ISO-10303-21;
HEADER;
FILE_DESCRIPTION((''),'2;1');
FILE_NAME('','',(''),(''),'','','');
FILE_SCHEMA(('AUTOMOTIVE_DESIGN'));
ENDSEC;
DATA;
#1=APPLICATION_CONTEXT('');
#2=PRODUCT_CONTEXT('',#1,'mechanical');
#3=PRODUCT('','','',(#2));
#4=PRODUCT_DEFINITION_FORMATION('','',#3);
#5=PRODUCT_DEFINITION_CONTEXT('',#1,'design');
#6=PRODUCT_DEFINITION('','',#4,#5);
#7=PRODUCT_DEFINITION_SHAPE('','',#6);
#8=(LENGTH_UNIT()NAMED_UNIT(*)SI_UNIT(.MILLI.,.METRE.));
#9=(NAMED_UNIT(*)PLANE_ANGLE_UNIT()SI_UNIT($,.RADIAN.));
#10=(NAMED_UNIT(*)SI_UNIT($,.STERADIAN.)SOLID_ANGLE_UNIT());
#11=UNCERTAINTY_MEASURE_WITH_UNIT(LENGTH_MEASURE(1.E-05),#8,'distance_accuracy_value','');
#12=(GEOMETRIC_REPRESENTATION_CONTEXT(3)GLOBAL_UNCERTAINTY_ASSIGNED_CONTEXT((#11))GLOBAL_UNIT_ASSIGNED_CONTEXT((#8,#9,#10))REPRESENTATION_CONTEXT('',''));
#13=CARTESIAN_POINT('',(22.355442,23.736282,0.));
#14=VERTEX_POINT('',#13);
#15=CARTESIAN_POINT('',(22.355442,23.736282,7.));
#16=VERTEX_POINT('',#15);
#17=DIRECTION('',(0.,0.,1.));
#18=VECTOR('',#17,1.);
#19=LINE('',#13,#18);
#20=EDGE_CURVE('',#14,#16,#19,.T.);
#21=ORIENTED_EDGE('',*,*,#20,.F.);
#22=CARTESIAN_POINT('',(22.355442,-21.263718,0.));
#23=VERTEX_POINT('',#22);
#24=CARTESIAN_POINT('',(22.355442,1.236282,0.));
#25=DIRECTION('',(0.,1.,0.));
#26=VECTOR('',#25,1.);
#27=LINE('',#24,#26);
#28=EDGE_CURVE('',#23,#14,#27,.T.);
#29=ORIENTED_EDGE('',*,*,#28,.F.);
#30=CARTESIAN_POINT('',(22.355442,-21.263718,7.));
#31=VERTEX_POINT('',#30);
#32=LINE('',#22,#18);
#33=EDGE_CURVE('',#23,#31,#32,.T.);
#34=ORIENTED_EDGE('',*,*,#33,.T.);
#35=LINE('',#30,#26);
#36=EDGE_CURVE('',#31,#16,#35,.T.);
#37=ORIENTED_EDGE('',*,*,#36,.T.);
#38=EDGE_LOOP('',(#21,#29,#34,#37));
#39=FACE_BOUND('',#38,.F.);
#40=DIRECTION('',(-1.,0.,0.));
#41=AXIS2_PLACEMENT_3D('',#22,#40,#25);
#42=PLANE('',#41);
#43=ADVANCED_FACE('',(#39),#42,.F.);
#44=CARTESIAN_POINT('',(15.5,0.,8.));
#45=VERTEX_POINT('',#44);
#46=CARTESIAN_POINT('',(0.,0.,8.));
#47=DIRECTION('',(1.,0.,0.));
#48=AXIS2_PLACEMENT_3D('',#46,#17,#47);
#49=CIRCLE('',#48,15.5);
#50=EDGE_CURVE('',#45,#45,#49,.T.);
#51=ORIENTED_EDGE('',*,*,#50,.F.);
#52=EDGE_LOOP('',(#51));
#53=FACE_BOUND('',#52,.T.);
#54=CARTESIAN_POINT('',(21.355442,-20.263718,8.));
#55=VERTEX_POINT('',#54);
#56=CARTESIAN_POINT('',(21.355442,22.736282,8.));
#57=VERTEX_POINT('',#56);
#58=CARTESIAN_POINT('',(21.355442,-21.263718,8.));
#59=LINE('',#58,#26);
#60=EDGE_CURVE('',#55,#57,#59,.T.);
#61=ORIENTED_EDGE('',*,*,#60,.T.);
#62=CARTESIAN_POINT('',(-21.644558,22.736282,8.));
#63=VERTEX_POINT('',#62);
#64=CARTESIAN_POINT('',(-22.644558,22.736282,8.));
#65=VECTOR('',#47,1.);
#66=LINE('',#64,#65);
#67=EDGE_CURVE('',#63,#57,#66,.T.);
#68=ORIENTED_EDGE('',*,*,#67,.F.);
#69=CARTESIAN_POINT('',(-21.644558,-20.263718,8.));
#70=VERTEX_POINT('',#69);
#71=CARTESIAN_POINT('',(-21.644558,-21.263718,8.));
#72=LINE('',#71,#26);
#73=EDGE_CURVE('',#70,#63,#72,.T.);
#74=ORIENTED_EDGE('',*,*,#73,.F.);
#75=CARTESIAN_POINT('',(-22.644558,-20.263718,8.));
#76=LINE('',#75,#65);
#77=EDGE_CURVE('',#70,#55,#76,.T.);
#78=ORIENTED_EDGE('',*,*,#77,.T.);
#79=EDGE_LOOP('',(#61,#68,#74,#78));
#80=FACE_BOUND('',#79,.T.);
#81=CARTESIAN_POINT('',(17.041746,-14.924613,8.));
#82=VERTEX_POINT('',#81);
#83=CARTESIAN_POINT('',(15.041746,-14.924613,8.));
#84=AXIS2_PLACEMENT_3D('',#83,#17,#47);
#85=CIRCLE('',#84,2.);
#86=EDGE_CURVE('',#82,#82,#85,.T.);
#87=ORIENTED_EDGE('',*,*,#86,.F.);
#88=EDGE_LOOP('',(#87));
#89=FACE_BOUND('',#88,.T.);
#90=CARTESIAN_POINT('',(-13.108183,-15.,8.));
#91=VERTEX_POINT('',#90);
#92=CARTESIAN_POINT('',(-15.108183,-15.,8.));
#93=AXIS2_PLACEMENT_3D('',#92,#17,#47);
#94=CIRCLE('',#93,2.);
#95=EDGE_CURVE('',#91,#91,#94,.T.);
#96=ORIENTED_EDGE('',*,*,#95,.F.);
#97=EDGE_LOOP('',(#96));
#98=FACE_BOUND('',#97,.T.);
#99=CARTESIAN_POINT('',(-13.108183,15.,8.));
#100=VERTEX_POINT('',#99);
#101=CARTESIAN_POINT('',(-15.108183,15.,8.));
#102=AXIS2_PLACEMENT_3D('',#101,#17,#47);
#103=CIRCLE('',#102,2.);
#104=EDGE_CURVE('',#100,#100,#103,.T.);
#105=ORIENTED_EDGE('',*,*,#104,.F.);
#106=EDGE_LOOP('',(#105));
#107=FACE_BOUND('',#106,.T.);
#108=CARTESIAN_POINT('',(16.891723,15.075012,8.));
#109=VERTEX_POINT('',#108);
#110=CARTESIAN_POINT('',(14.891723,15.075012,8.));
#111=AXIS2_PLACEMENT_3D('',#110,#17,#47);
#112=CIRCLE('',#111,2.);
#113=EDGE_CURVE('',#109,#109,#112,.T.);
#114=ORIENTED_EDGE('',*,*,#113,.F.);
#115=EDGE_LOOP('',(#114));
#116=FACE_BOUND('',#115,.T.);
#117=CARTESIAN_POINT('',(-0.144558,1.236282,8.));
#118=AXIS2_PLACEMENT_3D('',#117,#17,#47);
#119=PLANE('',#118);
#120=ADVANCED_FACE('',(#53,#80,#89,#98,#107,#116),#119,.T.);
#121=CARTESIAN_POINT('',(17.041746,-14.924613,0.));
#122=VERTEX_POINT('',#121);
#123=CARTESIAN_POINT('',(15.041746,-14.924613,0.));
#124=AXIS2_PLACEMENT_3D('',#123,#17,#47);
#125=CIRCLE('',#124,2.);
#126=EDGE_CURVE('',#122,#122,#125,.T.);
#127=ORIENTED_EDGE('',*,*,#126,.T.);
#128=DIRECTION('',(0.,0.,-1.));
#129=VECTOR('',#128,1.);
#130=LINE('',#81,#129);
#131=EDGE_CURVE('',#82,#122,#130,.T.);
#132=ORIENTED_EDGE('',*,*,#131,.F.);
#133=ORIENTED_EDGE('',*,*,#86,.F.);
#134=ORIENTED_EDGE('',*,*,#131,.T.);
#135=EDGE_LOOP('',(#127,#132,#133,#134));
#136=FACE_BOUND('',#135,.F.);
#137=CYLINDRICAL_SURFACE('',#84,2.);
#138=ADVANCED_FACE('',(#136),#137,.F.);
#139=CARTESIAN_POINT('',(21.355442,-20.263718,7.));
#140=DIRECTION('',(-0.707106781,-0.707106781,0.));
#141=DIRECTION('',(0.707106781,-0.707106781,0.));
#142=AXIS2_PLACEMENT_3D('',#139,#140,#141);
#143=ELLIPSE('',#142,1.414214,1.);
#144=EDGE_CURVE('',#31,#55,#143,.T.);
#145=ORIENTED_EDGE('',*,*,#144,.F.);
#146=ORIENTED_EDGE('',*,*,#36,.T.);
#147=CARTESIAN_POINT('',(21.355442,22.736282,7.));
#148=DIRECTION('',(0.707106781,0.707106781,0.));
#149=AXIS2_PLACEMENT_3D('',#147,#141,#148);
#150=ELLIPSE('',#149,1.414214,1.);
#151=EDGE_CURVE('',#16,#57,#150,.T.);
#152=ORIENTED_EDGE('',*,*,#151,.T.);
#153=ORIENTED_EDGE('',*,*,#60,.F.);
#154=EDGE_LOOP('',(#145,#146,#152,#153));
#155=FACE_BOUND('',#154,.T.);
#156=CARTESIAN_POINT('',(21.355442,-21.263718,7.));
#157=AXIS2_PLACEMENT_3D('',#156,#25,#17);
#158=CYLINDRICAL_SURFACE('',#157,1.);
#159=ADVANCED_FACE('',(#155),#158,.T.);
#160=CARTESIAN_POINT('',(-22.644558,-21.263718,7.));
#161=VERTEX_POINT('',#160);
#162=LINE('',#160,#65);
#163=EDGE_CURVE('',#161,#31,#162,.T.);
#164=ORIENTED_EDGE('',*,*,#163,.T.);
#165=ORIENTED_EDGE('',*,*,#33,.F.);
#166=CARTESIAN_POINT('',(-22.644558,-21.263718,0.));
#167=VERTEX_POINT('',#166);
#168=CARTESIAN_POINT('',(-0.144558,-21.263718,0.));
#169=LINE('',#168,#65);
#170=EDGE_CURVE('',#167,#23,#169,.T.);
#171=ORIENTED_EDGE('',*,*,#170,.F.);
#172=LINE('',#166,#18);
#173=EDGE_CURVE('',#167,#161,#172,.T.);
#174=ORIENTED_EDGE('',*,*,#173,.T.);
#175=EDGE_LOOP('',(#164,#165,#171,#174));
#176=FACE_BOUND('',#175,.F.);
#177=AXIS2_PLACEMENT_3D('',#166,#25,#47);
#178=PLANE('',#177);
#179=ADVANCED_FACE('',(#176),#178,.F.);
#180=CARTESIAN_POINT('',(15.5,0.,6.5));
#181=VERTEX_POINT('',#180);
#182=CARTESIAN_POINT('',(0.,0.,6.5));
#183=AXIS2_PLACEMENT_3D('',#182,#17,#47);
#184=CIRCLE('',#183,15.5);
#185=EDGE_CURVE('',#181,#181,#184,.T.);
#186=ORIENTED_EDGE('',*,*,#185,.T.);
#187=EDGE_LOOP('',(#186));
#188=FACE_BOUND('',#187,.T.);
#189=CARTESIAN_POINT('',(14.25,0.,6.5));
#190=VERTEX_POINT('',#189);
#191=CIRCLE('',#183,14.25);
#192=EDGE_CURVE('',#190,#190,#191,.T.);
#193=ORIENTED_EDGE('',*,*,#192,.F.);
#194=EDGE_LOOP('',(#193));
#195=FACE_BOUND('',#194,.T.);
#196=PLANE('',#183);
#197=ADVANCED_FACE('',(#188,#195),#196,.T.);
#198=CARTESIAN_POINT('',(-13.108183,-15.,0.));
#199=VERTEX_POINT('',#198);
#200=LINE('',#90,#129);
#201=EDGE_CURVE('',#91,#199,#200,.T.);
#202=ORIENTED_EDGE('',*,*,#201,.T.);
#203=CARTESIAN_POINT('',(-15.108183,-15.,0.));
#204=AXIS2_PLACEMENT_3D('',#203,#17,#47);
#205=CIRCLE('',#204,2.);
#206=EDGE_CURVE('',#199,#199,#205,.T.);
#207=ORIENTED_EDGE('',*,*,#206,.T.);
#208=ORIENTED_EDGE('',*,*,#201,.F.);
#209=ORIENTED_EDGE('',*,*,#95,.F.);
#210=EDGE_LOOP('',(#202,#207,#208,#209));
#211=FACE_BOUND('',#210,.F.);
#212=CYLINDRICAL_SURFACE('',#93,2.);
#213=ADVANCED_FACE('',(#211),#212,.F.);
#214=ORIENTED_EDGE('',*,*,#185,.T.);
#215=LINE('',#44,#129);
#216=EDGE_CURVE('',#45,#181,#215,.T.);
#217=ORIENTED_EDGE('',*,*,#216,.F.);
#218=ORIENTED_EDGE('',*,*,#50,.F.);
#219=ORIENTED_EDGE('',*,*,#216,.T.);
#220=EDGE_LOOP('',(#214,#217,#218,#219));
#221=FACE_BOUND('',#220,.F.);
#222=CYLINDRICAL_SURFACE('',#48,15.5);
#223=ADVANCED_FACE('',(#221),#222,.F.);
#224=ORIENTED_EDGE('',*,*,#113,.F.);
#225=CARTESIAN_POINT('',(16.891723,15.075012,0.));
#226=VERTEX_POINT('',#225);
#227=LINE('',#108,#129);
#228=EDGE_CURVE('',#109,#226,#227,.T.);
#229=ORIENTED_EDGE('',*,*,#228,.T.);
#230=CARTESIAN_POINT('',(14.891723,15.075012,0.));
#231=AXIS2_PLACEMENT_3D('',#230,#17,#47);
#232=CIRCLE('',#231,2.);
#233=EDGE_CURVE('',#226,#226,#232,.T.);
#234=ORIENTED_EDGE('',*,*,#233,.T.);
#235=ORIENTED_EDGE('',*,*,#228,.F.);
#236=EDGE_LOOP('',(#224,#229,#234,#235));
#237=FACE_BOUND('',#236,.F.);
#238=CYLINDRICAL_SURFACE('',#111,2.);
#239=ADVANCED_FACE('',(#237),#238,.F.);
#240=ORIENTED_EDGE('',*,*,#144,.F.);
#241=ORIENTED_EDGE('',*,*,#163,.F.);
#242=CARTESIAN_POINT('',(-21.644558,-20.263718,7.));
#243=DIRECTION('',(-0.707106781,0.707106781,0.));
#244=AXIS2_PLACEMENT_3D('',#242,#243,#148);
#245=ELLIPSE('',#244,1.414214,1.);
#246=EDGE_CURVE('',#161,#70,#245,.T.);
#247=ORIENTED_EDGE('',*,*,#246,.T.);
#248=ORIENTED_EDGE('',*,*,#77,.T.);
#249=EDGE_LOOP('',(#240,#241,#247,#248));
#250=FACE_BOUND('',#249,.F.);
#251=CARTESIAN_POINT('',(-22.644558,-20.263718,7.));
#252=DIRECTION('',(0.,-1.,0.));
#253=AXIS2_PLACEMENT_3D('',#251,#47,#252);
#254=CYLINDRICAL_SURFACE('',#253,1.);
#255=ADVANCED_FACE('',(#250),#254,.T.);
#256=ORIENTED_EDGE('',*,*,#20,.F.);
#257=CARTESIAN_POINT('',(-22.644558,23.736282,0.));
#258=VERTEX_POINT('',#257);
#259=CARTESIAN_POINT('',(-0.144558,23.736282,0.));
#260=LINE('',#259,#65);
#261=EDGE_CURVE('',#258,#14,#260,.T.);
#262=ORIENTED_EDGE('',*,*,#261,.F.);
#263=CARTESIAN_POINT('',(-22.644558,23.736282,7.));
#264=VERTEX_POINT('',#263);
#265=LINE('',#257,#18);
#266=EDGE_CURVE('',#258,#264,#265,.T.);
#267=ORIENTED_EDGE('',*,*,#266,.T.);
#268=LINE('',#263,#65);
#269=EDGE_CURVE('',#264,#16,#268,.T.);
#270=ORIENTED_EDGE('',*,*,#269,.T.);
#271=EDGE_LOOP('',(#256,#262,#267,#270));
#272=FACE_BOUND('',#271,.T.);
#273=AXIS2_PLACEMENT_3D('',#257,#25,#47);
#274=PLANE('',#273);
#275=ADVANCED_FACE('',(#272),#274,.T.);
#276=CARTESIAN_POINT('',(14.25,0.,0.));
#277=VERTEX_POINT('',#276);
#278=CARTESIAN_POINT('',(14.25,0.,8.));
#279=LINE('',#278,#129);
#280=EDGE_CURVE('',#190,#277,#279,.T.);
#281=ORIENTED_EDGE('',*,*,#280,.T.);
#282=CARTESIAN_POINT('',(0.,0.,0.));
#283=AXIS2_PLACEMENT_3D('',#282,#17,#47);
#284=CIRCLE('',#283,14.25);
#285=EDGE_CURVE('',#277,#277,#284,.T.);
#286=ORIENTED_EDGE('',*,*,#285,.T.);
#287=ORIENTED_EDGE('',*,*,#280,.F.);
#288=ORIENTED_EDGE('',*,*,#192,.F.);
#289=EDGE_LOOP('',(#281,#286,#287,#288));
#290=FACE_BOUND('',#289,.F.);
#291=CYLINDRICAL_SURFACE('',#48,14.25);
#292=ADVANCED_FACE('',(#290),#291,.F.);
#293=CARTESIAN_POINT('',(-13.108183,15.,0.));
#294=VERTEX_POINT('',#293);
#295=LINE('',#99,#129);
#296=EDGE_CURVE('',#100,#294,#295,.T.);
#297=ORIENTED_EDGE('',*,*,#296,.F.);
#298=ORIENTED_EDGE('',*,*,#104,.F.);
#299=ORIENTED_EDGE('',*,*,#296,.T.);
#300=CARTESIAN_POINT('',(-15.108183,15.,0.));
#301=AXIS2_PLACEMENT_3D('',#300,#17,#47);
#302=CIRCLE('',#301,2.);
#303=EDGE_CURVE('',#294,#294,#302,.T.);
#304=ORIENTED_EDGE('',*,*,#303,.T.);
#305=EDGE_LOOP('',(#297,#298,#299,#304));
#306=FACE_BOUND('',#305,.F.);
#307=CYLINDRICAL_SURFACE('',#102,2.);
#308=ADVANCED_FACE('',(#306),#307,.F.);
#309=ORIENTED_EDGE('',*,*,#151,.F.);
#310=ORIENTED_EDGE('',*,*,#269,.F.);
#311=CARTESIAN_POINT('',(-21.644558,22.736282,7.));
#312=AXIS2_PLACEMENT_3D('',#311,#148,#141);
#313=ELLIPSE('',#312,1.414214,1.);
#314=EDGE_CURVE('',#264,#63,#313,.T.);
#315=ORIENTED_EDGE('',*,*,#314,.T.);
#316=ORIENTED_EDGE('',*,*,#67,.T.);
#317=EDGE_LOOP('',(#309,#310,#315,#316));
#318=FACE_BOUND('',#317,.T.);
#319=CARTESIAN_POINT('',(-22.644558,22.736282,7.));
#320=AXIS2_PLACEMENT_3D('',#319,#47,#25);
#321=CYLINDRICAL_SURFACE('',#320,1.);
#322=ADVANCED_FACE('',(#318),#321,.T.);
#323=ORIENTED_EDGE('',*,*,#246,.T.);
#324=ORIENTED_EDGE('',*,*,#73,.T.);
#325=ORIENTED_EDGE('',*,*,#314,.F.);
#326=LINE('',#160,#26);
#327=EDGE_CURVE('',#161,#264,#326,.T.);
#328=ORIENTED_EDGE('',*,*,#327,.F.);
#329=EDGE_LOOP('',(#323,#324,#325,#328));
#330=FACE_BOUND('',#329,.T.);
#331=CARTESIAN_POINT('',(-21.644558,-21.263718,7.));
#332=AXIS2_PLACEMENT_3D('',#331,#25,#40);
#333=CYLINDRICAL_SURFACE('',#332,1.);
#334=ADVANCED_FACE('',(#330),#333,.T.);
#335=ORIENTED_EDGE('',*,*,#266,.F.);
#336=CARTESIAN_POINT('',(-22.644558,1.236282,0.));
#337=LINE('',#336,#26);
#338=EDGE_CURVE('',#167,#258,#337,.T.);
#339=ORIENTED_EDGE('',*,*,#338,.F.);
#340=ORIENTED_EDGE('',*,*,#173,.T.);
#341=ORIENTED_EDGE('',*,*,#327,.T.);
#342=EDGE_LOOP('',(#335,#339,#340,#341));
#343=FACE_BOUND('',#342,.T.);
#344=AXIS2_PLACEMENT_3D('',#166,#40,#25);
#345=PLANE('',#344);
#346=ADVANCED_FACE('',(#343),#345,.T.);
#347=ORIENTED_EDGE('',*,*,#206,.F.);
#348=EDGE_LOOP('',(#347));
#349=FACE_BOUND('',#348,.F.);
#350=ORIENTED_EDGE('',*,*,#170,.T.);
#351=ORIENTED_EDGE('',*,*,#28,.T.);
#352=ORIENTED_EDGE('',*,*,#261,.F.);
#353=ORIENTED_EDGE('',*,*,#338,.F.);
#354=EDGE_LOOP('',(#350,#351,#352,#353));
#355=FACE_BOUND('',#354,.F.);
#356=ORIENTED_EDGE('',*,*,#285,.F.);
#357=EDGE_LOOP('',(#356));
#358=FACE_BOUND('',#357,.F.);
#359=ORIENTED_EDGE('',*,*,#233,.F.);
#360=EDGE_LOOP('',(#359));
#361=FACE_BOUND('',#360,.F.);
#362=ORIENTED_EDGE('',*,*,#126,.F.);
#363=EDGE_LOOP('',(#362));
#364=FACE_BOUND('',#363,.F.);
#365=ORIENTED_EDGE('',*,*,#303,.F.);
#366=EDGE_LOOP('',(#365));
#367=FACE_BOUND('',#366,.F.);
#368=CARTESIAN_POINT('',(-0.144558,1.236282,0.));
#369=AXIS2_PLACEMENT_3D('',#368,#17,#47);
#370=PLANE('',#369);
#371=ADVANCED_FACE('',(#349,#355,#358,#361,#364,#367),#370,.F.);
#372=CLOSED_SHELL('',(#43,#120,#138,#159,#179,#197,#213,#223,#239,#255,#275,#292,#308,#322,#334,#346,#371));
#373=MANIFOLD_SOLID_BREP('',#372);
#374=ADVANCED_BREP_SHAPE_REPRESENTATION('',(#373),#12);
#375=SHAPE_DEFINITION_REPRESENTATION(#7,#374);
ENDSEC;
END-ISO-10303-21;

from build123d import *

# Parameters (mm, degrees)
F0_W          = 45
F0_H          = 45
F1_DEPTH      = 8
F2_R          = 14.25
F3_DEPTH      = 69
F3_DEPTH_BACK = 8
F4_W          = 45
F4_H          = 45
F4_R          = 15.5
F5_DEPTH      = 1.5
F6_R          = 1
F7_R          = 2
F8_DEPTH      = 8
F9_DEPTH      = 1.5


# Not quite as in the source:
# - an extrude ends at something that could not be found from the text; its depth is read off the source's solid


with BuildPart() as f1:
    # F0 (on Top) → F1 (new body)
    with BuildSketch(Plane.XY):
        with Locations((-0.144558493, 1.2362819078)):
            Rectangle(F0_W, F0_H)
    extrude(amount=F1_DEPTH)

    # F2 (on face) → F3 (cut, two sides)
    with BuildSketch(Plane.XY.offset(8)) as f3_sk:
        Circle(F2_R)
    extrude(amount=F3_DEPTH, mode=Mode.SUBTRACT)
    extrude(f3_sk.sketch, amount=-F3_DEPTH_BACK, mode=Mode.SUBTRACT)

    # F4 (on face) → F5 (cut)
    with BuildSketch(Plane.XY.offset(8)):
        with Locations((-0.144558493, 1.2362819078)):
            Rectangle(F4_W, F4_H)
        Circle(F4_R, mode=Mode.SUBTRACT)
    extrude(amount=F5_DEPTH, mode=Mode.SUBTRACT)

    # F6
    f6_edges = [f1.edges().sort_by_distance(p)[0] for p in [
        (-0.144558, 23.736282, 8),
        (-22.644558, 1.236282, 8),
        (-0.144558, -21.263718, 8),
        (22.355442, 1.236282, 8),
    ]]
    fillet(f6_edges, radius=F6_R)

    # F7 (on face) → F8 (cut)
    with BuildSketch(Plane.XY.offset(8)):
        with Locations((-15.1081832213, 15)):
            Circle(F7_R)
        with Locations((14.8917229997, 15.0750115548)):
            Circle(F7_R)
        with Locations((15.0417456403, -14.9246133297)):
            Circle(F7_R)
        with Locations((-15.1081832213, -15)):
            Circle(F7_R)
    extrude(amount=-F8_DEPTH, mode=Mode.SUBTRACT)

    # F4 (on face) → F9 (cut)
    with BuildSketch(Plane.XY.offset(8)):
        Circle(F4_R)
    extrude(amount=-F9_DEPTH, mode=Mode.SUBTRACT)


solid = f1.part
